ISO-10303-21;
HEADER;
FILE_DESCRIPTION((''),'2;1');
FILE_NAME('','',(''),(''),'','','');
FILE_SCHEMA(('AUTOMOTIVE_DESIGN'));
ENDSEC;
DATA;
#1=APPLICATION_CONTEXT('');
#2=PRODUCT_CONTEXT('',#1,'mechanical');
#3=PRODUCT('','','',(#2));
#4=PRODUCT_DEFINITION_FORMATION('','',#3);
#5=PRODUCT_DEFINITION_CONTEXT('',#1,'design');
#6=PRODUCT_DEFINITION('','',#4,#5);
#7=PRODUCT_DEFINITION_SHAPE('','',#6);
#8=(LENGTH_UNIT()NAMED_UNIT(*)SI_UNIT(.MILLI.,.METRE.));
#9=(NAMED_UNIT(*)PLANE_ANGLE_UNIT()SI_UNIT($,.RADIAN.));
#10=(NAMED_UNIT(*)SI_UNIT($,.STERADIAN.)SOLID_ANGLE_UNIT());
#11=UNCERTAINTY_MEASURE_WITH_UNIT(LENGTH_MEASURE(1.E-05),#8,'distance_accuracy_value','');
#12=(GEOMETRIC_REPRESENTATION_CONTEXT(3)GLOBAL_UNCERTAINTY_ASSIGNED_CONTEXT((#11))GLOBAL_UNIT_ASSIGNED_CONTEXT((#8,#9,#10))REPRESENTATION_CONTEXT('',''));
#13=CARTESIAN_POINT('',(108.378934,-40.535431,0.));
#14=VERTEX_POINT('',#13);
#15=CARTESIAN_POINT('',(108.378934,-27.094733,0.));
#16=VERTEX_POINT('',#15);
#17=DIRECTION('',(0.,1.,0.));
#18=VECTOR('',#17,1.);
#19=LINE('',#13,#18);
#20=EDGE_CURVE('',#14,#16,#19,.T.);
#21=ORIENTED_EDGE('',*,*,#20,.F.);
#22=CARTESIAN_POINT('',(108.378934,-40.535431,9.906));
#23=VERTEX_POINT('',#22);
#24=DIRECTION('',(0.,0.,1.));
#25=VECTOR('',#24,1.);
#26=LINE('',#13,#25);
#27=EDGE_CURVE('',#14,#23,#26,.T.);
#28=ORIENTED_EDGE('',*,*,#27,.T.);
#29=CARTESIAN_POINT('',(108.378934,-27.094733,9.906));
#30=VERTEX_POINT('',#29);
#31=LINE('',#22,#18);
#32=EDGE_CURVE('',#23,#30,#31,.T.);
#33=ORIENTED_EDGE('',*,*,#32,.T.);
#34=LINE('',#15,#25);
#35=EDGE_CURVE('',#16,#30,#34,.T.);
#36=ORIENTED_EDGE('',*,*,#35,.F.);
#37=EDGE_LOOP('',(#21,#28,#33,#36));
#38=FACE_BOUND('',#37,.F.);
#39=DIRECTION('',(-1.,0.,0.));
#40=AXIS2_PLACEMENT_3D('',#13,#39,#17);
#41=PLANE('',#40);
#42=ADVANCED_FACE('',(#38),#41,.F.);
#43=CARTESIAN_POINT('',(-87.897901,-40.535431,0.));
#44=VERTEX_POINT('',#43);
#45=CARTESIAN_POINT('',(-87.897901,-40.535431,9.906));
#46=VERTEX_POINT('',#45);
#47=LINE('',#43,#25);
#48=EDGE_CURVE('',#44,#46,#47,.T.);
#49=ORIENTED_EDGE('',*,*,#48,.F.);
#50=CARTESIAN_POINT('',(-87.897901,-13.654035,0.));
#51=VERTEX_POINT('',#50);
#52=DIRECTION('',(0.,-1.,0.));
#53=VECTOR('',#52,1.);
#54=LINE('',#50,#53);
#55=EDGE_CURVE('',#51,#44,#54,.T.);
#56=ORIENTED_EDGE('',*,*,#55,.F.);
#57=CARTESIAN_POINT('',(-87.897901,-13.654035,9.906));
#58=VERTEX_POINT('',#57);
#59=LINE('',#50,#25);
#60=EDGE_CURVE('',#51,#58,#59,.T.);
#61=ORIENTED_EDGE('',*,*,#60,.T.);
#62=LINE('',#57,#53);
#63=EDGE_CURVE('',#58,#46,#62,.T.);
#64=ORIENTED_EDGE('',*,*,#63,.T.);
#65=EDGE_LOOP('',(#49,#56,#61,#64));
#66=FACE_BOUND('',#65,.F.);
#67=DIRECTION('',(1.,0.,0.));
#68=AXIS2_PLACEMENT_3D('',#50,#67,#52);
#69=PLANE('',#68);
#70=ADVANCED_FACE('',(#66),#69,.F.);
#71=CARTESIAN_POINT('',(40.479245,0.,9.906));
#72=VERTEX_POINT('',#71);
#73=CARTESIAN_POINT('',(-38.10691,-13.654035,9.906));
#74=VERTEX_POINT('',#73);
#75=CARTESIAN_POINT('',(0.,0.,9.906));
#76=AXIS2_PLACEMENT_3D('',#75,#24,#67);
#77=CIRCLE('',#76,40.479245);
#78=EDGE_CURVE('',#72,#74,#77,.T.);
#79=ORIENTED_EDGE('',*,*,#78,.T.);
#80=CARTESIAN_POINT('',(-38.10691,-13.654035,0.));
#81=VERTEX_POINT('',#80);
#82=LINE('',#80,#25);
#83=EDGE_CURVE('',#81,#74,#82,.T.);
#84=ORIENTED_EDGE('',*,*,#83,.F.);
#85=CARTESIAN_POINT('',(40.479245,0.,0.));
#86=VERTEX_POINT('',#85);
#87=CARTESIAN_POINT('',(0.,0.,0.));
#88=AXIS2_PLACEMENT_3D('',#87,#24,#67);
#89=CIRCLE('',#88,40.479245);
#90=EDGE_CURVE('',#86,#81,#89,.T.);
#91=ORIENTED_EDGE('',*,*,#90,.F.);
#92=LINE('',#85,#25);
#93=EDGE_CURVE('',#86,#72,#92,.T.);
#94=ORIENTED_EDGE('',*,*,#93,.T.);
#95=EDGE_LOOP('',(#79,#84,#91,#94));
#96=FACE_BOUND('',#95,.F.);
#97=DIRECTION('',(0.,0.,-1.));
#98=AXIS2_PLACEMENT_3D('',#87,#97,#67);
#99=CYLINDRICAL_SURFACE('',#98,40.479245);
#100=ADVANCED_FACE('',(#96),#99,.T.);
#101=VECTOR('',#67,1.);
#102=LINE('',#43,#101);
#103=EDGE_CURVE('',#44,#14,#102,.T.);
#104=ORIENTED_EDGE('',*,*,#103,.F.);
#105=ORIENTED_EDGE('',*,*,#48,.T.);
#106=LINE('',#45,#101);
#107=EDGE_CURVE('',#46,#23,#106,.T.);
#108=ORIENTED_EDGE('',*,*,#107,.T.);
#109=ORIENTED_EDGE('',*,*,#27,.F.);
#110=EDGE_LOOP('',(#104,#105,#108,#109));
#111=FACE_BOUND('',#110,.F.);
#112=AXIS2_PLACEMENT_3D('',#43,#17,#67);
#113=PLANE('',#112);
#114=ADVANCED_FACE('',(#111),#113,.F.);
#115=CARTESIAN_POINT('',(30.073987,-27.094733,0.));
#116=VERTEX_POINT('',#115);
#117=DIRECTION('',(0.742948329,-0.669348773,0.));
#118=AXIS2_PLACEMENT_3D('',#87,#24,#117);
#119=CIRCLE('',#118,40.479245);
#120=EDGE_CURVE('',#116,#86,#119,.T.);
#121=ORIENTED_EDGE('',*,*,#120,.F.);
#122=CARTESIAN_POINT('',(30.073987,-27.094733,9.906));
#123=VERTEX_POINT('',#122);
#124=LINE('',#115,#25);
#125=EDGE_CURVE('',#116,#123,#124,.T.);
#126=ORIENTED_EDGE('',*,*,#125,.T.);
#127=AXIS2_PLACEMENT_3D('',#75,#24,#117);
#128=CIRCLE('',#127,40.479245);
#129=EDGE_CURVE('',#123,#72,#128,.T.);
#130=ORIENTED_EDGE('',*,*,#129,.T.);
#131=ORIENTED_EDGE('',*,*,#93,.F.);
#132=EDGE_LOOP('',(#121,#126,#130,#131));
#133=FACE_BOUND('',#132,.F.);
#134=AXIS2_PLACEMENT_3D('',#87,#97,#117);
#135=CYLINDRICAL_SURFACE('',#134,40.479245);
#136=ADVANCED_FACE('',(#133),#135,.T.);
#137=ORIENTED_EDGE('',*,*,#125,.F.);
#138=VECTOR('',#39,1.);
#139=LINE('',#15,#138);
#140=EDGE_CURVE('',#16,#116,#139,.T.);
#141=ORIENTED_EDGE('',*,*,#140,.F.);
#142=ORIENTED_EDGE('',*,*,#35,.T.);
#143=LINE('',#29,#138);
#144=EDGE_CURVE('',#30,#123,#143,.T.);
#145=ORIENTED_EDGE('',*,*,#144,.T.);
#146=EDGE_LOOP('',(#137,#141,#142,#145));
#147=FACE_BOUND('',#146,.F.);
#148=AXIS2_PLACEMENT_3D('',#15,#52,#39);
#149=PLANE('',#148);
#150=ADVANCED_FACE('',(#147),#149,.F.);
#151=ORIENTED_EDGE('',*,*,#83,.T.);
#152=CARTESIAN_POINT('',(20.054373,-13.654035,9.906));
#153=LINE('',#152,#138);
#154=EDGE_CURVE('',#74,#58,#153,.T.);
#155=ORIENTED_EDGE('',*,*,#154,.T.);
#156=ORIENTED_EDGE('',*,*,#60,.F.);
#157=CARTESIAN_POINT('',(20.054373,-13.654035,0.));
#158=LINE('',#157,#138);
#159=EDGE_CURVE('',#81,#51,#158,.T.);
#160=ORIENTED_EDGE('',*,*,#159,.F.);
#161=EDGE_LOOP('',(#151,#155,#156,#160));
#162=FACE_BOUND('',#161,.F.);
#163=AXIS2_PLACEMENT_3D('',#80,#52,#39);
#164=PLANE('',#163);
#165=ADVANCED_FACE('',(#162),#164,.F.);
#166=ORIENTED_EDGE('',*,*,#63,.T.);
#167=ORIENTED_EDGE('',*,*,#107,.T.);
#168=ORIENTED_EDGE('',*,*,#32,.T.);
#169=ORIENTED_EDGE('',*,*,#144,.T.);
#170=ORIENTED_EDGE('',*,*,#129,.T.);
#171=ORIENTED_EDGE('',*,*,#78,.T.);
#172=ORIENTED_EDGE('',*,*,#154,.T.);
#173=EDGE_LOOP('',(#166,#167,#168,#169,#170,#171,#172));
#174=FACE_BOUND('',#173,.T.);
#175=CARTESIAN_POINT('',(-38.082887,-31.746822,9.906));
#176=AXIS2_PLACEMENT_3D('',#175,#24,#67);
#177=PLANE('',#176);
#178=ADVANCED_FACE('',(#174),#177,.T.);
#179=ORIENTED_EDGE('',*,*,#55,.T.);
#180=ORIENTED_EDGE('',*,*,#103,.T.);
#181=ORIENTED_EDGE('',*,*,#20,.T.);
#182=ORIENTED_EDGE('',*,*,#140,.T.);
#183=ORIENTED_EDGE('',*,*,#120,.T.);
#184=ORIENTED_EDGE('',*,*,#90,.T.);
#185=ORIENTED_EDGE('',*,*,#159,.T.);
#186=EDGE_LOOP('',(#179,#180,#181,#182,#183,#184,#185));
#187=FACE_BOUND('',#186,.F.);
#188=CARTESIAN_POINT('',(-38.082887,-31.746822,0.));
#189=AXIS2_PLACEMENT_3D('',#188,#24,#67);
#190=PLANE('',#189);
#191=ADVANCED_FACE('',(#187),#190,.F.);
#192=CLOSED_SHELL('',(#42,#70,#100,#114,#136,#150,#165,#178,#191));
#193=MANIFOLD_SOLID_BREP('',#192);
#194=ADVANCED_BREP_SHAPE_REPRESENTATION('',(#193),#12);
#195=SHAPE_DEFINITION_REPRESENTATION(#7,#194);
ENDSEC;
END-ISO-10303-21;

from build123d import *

# Parameters (mm, degrees)
F1_DEPTH = 9.906


# Not quite as in the source:
# - a feature names something its author has since deleted; it is built from what else it names


with BuildPart() as f1:
    # F0 (on Top) → F1 (new body)
    with BuildSketch(Plane.XY):
        with BuildLine():
            Line((-38.1069101836, -13.6540351038), (-87.8979010638, -13.6540351038))
            Line((-87.8979010638, -13.6540351038), (-87.8979010638, -40.5354308852))
            Line((-87.8979010638, -40.5354308852), (20.0543733488, -40.5354308852))
            Line((20.0543733488, -40.5354308852), (20.0543733488, -35.1623575424))
            ThreePointArc((20.0543733488, -35.1623575424), (-14.0401390689, -37.9663505394), (-38.1069101836, -13.6540351038))
        make_face()
        with BuildLine():
            ThreePointArc((30.0739874694, -27.0947329945), (25.3867048086, -31.5291055584), (20.0543733488, -35.1623575424))
            Line((20.0543733488, -35.1623575424), (20.0543733488, -40.5354308852))
            Line((20.0543733488, -40.5354308852), (108.3789337528, -40.5354308852))
            Line((108.3789337528, -40.5354308852), (108.3789337528, -27.0947329945))
            Line((108.3789337528, -27.0947329945), (30.0739874694, -27.0947329945))
        make_face()
        with BuildLine():
            Line((20.0543733488, -13.6540351038), (-38.1069101836, -13.6540351038))
            ThreePointArc((-38.1069101836, -13.6540351038), (-14.0401390689, -37.9663505394), (20.0543733488, -35.1623575424))
            Line((20.0543733488, -35.1623575424), (20.0543733488, -27.0947329945))
            Line((20.0543733488, -27.0947329945), (20.0543733488, -13.6540351038))
        make_face()
        with BuildLine():
            Line((20.0543733488, -27.0947329945), (20.0543733488, -35.1623575424))
            ThreePointArc((20.0543733488, -35.1623575424), (25.3867048086, -31.5291055584), (30.0739874694, -27.0947329945))
            Line((30.0739874694, -27.0947329945), (20.0543733488, -27.0947329945))
        make_face()
        with BuildLine():
            ThreePointArc((40.4792450319, 0), (-6.9292973534, 39.8817516734), (-38.1069101836, -13.6540351038))
            Line((-38.1069101836, -13.6540351038), (20.0543733488, -13.6540351038))
            Line((20.0543733488, -13.6540351038), (20.0543733488, -27.0947329945))
            Line((20.0543733488, -27.0947329945), (30.0739874694, -27.0947329945))
            ThreePointArc((30.0739874694, -27.0947329945), (37.7885008052, -14.5120117574), (40.4792450319, 0))
        make_face()
    extrude(amount=F1_DEPTH)


solid = f1.part
